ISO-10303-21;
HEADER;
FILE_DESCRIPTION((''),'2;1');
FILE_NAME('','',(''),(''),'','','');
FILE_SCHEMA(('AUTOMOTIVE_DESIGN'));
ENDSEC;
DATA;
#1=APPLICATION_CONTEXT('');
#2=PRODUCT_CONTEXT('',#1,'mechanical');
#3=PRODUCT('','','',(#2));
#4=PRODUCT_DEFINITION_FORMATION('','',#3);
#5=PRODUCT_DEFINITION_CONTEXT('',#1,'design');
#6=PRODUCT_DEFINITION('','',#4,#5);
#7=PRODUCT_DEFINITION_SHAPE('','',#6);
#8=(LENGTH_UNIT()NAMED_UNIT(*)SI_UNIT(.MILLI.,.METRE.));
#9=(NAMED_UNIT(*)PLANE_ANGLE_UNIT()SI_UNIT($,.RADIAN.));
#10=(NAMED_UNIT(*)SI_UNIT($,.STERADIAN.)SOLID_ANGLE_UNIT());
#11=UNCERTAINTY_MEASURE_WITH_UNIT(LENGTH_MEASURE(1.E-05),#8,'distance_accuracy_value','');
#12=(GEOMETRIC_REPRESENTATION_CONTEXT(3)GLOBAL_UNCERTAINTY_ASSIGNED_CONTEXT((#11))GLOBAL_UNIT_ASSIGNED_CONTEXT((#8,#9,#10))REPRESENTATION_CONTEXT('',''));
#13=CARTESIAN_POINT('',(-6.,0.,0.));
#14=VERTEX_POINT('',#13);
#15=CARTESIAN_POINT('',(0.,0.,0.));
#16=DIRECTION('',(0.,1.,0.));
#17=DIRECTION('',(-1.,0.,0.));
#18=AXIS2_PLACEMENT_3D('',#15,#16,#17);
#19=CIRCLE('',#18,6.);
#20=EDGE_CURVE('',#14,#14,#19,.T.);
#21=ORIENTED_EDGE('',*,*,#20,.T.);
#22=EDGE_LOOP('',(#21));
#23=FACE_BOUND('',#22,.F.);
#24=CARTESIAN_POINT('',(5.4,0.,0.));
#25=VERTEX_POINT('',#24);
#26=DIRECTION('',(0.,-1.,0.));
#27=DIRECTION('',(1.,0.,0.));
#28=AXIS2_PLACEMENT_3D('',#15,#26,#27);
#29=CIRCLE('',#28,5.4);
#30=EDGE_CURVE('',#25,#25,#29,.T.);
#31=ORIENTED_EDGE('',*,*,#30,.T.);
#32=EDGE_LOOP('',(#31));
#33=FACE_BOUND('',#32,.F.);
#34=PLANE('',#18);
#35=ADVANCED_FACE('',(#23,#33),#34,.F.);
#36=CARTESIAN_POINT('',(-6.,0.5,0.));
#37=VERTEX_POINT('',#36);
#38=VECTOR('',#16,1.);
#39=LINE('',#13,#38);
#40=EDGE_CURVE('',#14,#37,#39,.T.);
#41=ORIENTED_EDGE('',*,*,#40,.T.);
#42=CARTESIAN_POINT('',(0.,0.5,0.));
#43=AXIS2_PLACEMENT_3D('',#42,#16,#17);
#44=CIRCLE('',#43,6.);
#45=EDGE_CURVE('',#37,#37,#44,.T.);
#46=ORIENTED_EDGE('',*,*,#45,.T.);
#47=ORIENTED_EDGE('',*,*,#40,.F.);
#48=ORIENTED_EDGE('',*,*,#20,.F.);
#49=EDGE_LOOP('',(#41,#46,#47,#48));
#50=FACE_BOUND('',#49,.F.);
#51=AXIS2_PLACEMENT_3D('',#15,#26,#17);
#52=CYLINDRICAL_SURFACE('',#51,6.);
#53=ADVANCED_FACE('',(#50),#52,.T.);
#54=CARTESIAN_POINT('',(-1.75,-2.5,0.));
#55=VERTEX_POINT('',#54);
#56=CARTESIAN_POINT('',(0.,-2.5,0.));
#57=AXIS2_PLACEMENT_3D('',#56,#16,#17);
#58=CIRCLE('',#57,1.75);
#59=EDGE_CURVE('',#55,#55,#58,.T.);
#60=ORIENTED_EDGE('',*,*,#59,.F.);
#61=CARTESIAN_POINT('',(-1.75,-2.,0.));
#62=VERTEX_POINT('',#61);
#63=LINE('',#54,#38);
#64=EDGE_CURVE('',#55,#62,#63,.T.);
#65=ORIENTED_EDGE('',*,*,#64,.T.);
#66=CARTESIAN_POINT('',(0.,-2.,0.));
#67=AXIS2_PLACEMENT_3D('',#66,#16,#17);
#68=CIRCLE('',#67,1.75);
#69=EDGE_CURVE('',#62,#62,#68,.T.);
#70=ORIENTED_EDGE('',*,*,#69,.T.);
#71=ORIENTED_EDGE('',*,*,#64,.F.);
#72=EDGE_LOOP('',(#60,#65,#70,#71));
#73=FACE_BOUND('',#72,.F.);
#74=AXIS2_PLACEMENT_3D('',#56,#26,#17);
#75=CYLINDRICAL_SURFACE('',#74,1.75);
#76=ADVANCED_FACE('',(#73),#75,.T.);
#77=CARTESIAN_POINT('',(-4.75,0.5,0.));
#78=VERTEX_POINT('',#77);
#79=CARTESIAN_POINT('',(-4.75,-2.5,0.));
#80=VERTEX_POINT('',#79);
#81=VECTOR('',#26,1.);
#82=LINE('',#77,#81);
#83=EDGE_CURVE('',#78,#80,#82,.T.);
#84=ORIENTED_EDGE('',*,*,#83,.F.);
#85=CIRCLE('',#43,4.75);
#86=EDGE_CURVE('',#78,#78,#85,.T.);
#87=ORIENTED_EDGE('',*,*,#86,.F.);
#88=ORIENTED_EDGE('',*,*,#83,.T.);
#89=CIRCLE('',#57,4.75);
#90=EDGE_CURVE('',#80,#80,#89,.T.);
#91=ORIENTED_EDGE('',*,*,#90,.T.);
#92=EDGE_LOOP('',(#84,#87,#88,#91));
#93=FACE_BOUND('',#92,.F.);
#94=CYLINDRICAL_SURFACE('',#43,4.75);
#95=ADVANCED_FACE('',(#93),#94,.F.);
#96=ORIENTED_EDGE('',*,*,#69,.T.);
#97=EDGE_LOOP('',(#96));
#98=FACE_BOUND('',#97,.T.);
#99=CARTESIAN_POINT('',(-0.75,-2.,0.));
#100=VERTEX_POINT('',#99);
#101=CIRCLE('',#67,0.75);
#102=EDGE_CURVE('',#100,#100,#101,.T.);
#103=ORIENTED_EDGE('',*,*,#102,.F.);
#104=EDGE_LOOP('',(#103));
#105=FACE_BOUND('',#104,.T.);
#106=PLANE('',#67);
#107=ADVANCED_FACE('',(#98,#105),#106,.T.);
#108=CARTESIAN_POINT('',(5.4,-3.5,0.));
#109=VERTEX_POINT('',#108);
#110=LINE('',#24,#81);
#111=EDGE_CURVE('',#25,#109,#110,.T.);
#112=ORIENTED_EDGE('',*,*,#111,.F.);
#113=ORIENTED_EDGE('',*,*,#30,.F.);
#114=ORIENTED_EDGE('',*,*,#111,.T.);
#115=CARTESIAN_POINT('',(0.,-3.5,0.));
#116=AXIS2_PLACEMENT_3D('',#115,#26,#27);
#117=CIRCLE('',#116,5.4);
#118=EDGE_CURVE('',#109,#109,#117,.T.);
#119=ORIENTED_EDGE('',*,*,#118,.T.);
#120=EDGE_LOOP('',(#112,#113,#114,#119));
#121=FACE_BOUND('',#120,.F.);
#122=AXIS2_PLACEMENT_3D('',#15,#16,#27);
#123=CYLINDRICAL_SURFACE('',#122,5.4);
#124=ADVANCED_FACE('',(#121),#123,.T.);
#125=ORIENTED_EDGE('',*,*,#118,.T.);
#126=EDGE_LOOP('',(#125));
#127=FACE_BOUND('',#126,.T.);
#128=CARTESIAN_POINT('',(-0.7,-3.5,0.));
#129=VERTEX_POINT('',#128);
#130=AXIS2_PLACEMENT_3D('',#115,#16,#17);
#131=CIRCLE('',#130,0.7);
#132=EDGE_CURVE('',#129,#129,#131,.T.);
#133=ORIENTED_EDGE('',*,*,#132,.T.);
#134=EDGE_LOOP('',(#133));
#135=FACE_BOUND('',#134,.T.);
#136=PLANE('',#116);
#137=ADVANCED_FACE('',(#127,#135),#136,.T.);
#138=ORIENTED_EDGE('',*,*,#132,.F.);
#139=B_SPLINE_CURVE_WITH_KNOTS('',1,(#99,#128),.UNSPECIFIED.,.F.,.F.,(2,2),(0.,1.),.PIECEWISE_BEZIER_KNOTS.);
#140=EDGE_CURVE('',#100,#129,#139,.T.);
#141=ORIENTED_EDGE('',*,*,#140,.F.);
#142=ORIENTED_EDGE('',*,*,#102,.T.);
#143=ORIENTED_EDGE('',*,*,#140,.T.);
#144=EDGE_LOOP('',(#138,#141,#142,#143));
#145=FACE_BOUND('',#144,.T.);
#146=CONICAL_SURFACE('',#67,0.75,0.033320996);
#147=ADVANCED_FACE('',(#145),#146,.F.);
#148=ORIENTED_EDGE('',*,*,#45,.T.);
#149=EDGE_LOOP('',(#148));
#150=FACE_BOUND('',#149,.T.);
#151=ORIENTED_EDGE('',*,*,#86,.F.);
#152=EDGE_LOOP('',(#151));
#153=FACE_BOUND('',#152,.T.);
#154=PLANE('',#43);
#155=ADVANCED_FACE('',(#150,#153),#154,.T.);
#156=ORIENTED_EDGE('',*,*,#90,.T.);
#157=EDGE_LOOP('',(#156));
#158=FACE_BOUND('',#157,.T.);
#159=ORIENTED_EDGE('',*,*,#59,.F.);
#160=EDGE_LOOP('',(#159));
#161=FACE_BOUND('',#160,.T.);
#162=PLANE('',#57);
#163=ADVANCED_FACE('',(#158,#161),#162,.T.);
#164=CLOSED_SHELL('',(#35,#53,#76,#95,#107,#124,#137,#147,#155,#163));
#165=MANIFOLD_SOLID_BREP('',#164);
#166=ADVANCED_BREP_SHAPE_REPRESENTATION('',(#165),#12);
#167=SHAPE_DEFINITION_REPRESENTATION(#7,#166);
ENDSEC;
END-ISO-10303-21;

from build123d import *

# Parameters (mm, degrees)
F0_R     = 5.4
F1_DEPTH = 3.5
F2_R     = 6
F2_R_2   = 5.4
F3_DEPTH = 0.5
F4_R     = 4.75
F5_DEPTH = 3
F7_R     = 1.75
F8_DEPTH = 0.5
F9_R     = 0.75
F6_R     = 0.7


with BuildPart() as f1:
    # F0 (on Front) → F1 (new body)
    with BuildSketch(Plane.XZ):
        Circle(F0_R)
    extrude(amount=F1_DEPTH)

    # F2 (on face) → F3 (join)
    with BuildSketch(Plane(origin=(0, 0, 0), x_dir=(-1, 0, 0), z_dir=(0, 1, 0))):
        Circle(F2_R)
        Circle(F2_R_2, mode=Mode.SUBTRACT)
        Circle(F2_R_2)
    extrude(amount=F3_DEPTH)

    # F4 (on face) → F5 (cut)
    with BuildSketch(Plane(origin=(0, 0.5, 0), x_dir=(-1, 0, 0), z_dir=(0, 1, 0))):
        Circle(F4_R)
    extrude(amount=-F5_DEPTH, mode=Mode.SUBTRACT)

    # F7 (on face) → F8 (join)
    with BuildSketch(Plane(origin=(0, -2.5, 0), x_dir=(-1, 0, 0), z_dir=(0, 1, 0))):
        Circle(F7_R)
    extrude(amount=F8_DEPTH)

    # F9 (on face) → F10 section 0
    with BuildSketch(Plane(origin=(0, -2, 0), x_dir=(-1, 0, 0), z_dir=(0, 1, 0))):
        Circle(F9_R)
    # F6 (on face) → F10 section 1
    with BuildSketch(Plane.XZ.offset(3.5)):
        Circle(F6_R)
    loft(mode=Mode.SUBTRACT)


solid = f1.part
